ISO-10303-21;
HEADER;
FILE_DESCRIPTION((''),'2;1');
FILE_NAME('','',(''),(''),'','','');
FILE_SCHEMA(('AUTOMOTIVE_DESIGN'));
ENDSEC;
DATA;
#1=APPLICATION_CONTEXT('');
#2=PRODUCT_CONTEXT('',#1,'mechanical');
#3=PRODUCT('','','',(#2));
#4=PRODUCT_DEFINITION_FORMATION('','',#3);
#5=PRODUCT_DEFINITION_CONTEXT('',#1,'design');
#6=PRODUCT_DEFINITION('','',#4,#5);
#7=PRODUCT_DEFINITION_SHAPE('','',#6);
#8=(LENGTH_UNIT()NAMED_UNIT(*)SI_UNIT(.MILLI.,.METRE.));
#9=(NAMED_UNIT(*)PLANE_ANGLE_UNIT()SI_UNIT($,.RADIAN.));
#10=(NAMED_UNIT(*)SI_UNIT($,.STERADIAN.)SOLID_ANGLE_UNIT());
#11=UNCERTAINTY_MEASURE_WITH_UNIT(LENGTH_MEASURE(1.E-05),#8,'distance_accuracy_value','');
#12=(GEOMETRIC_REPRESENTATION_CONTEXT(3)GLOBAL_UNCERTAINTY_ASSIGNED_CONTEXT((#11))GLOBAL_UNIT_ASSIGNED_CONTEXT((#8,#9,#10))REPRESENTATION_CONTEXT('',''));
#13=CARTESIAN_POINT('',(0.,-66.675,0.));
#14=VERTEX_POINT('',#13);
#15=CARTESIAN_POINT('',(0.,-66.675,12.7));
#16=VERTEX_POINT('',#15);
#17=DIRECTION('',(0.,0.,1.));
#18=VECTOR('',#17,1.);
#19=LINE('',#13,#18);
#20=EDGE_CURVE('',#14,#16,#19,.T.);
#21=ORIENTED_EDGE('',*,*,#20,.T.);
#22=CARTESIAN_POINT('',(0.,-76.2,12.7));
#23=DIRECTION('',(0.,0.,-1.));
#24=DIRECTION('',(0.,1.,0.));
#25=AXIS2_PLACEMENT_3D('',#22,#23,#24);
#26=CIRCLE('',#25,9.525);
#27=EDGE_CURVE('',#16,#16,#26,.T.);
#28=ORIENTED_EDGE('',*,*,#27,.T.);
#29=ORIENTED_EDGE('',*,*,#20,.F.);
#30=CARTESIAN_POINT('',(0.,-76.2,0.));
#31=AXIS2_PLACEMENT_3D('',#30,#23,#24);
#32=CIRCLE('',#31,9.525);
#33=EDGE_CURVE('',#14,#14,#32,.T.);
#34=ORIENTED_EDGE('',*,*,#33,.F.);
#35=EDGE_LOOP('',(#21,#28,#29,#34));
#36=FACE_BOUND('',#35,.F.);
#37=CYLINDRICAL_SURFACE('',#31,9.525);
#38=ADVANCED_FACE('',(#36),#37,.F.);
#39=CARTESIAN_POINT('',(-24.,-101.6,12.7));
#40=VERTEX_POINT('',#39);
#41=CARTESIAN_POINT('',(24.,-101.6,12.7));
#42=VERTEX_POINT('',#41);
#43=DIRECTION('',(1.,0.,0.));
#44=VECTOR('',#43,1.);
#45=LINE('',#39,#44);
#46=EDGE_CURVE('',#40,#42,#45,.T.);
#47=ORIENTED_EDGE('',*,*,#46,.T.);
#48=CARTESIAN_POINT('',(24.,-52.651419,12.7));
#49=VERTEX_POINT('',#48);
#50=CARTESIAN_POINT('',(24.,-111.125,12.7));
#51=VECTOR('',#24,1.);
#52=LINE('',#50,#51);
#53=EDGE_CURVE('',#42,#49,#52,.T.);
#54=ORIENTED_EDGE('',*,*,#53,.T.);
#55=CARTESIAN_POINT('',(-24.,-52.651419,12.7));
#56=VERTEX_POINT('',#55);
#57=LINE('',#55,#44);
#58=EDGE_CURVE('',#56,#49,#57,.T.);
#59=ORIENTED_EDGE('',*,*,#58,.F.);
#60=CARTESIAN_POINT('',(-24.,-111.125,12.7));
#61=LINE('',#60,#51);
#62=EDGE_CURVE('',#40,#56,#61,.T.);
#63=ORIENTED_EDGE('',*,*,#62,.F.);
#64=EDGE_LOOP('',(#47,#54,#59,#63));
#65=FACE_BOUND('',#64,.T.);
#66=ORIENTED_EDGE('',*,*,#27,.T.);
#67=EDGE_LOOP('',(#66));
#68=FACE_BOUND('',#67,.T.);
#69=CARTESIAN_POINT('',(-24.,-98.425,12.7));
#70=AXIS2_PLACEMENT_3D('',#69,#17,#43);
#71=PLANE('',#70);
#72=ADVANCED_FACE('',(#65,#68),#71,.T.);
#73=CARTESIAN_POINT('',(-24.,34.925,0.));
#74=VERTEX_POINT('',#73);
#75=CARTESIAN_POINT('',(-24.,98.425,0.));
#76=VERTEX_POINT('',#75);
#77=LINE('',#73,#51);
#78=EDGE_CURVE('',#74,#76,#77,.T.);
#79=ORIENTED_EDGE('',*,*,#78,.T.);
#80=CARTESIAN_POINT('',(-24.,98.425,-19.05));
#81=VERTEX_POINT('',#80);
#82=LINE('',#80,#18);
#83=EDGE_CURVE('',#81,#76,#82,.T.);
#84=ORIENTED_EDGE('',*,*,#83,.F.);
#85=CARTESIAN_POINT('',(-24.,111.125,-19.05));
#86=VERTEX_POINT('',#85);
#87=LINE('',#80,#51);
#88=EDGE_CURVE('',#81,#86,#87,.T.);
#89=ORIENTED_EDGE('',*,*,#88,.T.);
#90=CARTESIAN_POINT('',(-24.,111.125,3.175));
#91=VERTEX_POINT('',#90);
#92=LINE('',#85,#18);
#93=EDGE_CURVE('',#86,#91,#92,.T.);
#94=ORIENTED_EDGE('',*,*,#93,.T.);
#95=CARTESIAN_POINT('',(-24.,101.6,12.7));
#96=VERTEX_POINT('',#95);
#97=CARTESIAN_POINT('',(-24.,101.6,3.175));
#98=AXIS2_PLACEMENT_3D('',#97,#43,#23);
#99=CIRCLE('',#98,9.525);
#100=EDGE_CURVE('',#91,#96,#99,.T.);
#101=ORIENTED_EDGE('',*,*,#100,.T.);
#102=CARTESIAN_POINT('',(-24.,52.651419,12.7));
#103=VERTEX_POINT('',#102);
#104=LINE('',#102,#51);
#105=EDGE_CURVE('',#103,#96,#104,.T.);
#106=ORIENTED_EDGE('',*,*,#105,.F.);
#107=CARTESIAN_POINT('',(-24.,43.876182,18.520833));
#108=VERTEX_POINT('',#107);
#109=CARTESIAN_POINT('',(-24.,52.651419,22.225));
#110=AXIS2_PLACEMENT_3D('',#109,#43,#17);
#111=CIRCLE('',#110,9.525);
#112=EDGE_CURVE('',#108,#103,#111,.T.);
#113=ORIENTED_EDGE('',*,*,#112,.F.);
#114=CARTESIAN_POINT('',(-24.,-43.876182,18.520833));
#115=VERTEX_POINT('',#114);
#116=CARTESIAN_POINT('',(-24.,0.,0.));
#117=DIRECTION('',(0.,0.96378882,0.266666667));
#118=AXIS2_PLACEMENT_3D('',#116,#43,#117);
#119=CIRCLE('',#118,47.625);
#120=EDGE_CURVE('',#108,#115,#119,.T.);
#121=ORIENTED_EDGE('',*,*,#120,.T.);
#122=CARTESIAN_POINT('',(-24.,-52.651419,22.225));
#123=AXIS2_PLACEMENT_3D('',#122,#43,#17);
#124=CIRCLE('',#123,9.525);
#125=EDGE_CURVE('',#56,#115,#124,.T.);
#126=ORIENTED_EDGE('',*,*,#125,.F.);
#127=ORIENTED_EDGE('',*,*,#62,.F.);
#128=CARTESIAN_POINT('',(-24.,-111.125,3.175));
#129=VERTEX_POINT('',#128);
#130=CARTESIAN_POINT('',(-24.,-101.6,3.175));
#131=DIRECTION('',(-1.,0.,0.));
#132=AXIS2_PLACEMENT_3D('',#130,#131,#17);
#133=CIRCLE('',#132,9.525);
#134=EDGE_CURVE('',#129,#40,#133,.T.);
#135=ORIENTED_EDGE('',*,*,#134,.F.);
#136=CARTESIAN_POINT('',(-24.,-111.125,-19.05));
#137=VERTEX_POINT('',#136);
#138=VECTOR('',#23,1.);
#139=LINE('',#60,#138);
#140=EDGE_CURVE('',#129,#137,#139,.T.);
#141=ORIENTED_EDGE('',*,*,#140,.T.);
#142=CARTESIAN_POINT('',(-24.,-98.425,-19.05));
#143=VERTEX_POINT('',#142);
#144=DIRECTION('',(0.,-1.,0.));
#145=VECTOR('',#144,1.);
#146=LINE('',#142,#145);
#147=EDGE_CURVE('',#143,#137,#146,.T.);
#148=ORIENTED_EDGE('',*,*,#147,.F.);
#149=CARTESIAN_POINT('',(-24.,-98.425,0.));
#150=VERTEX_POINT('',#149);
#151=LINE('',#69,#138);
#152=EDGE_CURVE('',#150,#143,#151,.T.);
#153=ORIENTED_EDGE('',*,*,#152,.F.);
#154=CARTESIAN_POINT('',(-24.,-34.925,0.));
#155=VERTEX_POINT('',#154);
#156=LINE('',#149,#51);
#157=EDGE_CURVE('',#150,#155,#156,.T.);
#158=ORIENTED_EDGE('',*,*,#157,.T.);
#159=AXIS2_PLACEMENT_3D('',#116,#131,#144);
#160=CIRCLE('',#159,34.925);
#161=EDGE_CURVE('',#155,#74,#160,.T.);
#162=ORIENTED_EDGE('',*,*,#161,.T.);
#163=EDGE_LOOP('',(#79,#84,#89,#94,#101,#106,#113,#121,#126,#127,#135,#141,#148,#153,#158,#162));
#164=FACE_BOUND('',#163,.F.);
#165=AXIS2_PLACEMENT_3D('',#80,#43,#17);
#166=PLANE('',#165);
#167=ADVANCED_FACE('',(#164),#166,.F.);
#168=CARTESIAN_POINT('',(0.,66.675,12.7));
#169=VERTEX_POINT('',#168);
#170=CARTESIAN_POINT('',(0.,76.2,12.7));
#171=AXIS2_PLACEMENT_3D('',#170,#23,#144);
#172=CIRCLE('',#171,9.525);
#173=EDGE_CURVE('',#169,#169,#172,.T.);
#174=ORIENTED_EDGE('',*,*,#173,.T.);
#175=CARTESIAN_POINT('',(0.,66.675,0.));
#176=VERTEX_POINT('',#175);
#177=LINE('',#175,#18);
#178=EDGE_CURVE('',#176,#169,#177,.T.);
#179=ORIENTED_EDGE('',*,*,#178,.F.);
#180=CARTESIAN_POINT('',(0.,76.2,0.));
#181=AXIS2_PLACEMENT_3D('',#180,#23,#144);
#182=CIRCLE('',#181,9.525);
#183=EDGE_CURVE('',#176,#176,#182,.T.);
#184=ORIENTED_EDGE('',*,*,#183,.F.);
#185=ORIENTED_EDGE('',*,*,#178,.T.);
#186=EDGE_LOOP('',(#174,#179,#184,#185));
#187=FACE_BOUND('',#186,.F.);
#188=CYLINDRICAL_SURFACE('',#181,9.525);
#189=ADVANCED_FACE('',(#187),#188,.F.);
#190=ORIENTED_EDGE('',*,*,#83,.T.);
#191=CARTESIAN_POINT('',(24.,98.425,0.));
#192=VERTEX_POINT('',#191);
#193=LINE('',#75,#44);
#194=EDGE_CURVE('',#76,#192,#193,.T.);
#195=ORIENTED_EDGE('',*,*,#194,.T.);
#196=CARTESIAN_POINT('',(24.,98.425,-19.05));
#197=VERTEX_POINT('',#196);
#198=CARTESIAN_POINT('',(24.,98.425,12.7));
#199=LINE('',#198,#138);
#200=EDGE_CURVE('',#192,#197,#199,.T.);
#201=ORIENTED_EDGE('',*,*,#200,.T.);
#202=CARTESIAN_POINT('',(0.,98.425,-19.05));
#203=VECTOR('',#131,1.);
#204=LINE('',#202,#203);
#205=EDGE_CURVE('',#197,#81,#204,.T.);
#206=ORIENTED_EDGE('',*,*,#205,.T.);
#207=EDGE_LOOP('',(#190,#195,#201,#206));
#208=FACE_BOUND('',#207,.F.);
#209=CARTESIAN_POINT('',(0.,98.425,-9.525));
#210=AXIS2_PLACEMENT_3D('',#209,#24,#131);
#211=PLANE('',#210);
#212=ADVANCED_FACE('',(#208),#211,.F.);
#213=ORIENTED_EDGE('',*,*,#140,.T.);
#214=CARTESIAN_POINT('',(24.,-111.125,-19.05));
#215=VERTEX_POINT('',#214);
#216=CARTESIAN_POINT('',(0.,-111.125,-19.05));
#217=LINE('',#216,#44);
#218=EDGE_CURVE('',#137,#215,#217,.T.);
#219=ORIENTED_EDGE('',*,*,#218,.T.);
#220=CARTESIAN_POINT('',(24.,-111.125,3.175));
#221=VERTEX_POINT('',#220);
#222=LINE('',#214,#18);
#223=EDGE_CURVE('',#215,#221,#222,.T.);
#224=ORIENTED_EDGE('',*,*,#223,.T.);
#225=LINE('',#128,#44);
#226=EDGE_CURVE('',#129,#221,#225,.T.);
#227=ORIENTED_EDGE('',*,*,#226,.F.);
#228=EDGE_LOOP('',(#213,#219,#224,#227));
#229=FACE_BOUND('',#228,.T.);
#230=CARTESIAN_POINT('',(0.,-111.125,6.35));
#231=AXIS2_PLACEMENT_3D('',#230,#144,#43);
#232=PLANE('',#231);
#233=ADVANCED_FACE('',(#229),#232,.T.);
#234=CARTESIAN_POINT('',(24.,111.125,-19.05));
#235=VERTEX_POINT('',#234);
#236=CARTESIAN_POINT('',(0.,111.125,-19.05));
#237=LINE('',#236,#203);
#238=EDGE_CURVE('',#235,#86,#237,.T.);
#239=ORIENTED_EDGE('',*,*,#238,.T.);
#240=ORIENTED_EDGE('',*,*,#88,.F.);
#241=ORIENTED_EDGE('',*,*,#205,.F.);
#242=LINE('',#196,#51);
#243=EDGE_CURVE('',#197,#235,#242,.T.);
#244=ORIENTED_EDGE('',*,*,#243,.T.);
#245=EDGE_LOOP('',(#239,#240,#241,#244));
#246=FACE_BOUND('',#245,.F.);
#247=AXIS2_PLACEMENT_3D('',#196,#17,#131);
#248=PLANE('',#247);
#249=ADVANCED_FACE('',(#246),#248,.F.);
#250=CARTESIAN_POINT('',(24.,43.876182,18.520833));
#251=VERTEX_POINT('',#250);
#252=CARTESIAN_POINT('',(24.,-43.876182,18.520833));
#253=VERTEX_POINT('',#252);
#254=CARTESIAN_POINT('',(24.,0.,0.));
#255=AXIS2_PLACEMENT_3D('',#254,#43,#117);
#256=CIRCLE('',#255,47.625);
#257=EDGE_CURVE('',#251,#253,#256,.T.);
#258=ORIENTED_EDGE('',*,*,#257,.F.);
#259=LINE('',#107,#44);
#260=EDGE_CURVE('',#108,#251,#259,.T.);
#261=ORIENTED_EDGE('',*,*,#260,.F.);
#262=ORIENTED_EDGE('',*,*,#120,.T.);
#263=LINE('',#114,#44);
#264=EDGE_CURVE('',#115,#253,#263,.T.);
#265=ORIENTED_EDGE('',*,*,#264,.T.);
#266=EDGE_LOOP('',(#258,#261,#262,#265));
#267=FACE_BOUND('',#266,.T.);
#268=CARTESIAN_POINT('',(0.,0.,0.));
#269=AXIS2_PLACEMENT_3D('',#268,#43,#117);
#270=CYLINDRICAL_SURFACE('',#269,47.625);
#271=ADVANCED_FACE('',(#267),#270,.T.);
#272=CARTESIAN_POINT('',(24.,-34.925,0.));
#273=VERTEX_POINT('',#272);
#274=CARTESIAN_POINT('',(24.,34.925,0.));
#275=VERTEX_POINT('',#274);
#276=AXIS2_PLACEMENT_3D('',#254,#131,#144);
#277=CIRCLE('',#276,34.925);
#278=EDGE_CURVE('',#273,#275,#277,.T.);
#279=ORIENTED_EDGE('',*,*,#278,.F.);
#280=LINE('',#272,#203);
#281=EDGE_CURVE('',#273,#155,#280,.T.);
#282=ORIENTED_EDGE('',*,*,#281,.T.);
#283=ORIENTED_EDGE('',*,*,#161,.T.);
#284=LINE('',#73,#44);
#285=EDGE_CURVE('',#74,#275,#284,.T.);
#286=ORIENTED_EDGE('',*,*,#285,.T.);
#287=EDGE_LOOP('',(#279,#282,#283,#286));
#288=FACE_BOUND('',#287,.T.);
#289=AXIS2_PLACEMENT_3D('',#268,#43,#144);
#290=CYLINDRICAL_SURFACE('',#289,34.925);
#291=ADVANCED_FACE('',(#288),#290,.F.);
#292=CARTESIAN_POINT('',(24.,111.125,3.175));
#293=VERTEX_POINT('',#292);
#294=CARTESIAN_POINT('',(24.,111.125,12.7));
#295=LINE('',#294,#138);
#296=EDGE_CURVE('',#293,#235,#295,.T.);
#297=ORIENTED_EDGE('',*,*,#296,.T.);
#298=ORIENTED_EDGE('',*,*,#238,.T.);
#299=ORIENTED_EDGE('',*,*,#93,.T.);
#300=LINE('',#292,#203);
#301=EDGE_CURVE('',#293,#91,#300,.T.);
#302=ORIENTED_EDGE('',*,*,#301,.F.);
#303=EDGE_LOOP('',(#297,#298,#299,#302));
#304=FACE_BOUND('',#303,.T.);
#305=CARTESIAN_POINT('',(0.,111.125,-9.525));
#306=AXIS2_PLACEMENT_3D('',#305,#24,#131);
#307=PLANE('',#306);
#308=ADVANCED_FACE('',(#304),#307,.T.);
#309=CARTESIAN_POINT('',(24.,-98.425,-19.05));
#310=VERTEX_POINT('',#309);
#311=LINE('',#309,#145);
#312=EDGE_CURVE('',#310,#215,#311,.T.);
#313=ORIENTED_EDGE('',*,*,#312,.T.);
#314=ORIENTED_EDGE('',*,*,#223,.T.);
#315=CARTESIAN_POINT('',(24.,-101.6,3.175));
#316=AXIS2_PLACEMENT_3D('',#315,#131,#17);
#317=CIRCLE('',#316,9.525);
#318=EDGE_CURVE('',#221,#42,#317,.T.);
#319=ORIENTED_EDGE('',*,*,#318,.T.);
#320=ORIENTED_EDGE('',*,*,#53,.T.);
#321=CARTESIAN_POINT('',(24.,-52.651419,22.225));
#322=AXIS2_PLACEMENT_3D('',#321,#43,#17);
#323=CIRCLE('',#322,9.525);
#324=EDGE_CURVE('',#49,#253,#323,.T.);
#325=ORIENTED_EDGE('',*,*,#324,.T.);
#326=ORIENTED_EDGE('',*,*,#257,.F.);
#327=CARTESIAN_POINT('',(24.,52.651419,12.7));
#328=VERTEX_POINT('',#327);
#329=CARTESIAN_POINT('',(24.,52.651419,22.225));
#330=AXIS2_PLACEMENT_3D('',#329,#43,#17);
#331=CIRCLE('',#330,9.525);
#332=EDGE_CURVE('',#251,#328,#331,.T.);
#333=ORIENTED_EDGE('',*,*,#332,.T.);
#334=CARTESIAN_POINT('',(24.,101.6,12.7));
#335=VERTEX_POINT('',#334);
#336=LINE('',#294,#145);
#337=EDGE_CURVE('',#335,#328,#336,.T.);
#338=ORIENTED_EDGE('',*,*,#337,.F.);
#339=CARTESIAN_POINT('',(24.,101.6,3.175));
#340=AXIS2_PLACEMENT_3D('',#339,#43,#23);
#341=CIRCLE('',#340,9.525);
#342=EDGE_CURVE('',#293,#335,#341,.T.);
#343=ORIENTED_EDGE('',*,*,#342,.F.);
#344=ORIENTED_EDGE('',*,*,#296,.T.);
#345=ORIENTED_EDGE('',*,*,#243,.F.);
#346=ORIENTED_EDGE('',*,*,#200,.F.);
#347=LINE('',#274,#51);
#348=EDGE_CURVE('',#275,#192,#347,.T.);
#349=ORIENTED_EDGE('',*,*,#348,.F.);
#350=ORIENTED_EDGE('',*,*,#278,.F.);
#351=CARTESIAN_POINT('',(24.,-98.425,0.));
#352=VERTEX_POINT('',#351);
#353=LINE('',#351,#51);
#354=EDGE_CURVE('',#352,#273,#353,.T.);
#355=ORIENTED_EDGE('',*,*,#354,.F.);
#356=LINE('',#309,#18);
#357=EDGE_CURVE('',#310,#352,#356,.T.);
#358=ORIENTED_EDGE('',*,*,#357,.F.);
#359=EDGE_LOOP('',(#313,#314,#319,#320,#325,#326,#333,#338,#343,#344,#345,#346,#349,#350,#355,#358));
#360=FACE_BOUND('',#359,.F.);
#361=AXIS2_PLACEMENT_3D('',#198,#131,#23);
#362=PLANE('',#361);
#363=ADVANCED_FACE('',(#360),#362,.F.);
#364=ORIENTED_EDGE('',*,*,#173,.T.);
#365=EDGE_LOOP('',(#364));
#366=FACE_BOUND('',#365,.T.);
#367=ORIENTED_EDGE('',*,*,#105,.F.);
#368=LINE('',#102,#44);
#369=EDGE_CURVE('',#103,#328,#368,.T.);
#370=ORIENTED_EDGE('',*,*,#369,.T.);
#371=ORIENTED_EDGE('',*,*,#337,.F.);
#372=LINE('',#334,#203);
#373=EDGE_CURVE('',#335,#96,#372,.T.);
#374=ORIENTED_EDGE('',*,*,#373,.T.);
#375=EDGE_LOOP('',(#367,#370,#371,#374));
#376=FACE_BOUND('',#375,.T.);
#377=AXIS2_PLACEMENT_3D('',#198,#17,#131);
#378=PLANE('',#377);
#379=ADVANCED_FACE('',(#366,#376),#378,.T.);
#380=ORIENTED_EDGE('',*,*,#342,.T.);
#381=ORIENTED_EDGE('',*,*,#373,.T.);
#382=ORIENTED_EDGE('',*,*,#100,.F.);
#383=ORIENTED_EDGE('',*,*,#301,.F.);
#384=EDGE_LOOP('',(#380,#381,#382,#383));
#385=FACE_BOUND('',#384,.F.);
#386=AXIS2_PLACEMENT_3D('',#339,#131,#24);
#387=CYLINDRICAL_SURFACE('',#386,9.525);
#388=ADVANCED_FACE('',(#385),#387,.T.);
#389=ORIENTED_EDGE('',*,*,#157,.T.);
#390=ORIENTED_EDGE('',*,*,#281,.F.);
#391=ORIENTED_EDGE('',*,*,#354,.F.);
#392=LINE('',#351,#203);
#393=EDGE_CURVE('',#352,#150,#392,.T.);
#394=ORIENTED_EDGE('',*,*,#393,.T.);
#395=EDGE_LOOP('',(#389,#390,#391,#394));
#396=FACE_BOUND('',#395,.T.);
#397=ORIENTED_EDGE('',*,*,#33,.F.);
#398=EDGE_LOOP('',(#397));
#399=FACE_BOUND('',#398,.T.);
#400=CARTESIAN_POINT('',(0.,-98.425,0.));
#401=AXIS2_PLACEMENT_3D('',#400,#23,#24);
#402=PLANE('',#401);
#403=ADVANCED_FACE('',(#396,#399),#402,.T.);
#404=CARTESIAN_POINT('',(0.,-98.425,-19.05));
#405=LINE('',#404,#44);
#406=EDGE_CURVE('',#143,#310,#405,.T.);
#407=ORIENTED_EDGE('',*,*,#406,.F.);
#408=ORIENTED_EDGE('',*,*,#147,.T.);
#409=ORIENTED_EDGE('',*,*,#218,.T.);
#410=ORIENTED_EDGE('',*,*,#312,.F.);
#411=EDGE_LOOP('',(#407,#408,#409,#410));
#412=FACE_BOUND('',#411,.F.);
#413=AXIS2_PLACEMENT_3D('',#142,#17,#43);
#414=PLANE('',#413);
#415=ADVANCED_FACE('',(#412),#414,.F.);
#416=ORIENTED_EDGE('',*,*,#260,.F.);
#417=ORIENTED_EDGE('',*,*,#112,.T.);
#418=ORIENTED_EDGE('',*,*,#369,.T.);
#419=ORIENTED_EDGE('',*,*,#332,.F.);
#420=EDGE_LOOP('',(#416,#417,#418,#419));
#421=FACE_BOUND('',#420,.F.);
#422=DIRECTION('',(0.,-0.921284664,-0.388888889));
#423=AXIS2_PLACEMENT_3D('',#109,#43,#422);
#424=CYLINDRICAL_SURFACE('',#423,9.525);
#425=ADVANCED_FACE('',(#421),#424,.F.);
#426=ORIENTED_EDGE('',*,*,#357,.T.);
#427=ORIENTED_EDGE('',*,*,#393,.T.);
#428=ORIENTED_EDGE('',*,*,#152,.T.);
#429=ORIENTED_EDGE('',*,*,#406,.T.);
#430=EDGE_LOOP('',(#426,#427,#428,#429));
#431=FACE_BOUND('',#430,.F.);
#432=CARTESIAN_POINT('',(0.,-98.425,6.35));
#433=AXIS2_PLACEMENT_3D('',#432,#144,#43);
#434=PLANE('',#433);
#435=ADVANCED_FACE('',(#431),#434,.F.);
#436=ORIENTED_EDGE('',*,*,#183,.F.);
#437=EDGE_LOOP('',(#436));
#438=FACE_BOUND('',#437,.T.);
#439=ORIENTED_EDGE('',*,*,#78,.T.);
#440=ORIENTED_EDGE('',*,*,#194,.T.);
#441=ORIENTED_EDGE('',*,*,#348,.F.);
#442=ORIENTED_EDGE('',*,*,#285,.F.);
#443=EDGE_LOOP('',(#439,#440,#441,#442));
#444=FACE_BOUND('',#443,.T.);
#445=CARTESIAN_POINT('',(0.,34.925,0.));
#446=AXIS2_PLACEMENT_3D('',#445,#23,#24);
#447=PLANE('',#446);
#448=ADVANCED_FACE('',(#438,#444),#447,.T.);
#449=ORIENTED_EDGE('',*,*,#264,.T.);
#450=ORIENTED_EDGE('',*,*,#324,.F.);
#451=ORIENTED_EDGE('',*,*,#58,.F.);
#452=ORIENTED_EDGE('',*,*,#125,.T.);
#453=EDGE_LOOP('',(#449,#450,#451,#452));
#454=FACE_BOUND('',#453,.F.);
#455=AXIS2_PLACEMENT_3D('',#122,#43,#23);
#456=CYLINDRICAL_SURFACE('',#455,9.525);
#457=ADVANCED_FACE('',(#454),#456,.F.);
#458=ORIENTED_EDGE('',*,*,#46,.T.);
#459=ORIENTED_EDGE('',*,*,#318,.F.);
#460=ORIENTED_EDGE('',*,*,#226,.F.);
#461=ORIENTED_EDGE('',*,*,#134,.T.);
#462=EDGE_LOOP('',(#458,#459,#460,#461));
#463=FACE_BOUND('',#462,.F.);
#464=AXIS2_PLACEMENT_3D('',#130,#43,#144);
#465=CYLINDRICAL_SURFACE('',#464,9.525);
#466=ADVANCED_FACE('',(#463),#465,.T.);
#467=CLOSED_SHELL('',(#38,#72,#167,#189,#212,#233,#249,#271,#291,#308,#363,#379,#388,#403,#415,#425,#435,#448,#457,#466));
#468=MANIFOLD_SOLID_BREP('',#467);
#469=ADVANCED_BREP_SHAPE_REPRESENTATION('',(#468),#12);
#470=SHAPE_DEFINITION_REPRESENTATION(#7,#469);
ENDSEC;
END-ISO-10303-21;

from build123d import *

# Parameters (mm, degrees)
F1_DEPTH  = 24
F2_W      = 48
F2_H      = 12.7
F2_H_2    = 19.05
F3_DEPTH  = 12.7
F4_R      = 9.525
F6_R      = 9.525
F8_DEPTH  = 47.498
F10_DEPTH = 25.4
F5_W      = 48
F5_H      = 19.05
F5_H_2    = 12.7
F11_DEPTH = 12.7
F12_R     = 9.525
F15_DEPTH = 25.4


# Not quite as in the source:
# - two fillets or chamfers of one size are made in one step
# - a feature names something its author has since deleted; it is built from what else it names


with BuildPart() as f1:
    # F0 (on Right) → F1 (new body, symmetric)
    with BuildSketch(Plane.YZ):
        with BuildLine():
            ThreePointArc((-34.925, 0), (0, 34.925), (34.925, 0))
            Line((34.925, 0), (98.425, 0))
            Line((98.425, 0), (98.425, 12.7))
            Line((98.425, 12.7), (87.425, 12.7))
            Line((87.425, 12.7), (45.900442536, 12.7))
            ThreePointArc((45.900442536, 12.7), (0, 47.625), (-45.900442536, 12.7))
            Line((-45.900442536, 12.7), (-98.425, 12.7))
            Line((-98.425, 12.7), (-98.425, 0))
            Line((-98.425, 0), (-34.925, 0))
        make_face()
    extrude(amount=F1_DEPTH, both=True)

    # F2 (on face) → F3 (join)
    with BuildSketch(Plane.XZ.offset(98.425)):
        with Locations((0, 6.35)):
            Rectangle(F2_W, F2_H)
        with Locations((0, -9.525)):
            Rectangle(F2_W, F2_H_2)
    extrude(amount=F3_DEPTH)

    # F4
    f4_edges = [f1.edges().sort_by_distance(p)[0] for p in [
        (0, -111.125, 12.7),
    ]]
    fillet(f4_edges, radius=F4_R)

    # F6
    f6_edges = [f1.edges().sort_by_distance(p)[0] for p in [
        (0, -45.900443, 12.7),
        (0, 45.900443, 12.7),
    ]]
    fillet(f6_edges, radius=F6_R)

    # F7 (on face) → F8 (cut)
    with BuildSketch(Plane(origin=(0, 0, 0), x_dir=(1, 0, 0), z_dir=(0, 0, -1))):
        with BuildLine():
            ThreePointArc((9.525, 76.2), (-6.7351920908, 82.9351920908), (0, 66.675))
            ThreePointArc((0, 66.675), (6.7351920908, 69.4648079092), (9.525, 76.2))
        make_face()
    extrude(amount=-F8_DEPTH, mode=Mode.SUBTRACT)

    # F9 (on face) → F10 (cut)
    with BuildSketch(Plane(origin=(0, 0, 0), x_dir=(1, 0, 0), z_dir=(0, 0, -1))):
        with BuildLine():
            ThreePointArc((9.525, -6.35), (6.7351920908, 0.3851920908), (0, 3.175))
            ThreePointArc((0, 3.175), (-6.7351920908, -13.0851920908), (9.525, -6.35))
        make_face()
    extrude(amount=-F10_DEPTH, mode=Mode.SUBTRACT)

    # F5 (on face) → F11 (join)
    with BuildSketch(Plane(origin=(0, 98.425, 0), x_dir=(-1, 0, 0), z_dir=(0, 1, 0))):
        with Locations((0, -9.525)):
            Rectangle(F5_W, F5_H)
        with Locations((0, 6.35)):
            Rectangle(F5_W, F5_H_2)
    extrude(amount=F11_DEPTH)

    # F12
    f12_edges = [f1.edges().sort_by_distance(p)[0] for p in [
        (0, 111.125, 12.7),
    ]]
    fillet(f12_edges, radius=F12_R)

    # F14 (on face) → F15 (cut)
    with BuildSketch(Plane(origin=(0, 0, 0), x_dir=(1, 0, 0), z_dir=(0, 0, -1))):
        with BuildLine():
            ThreePointArc((9.525, -76.2), (6.7351920908, -69.4648079092), (0, -66.675))
            ThreePointArc((0, -66.675), (-6.7351920908, -82.9351920908), (9.525, -76.2))
        make_face()
    extrude(amount=-F15_DEPTH, mode=Mode.SUBTRACT)


solid = f1.part
